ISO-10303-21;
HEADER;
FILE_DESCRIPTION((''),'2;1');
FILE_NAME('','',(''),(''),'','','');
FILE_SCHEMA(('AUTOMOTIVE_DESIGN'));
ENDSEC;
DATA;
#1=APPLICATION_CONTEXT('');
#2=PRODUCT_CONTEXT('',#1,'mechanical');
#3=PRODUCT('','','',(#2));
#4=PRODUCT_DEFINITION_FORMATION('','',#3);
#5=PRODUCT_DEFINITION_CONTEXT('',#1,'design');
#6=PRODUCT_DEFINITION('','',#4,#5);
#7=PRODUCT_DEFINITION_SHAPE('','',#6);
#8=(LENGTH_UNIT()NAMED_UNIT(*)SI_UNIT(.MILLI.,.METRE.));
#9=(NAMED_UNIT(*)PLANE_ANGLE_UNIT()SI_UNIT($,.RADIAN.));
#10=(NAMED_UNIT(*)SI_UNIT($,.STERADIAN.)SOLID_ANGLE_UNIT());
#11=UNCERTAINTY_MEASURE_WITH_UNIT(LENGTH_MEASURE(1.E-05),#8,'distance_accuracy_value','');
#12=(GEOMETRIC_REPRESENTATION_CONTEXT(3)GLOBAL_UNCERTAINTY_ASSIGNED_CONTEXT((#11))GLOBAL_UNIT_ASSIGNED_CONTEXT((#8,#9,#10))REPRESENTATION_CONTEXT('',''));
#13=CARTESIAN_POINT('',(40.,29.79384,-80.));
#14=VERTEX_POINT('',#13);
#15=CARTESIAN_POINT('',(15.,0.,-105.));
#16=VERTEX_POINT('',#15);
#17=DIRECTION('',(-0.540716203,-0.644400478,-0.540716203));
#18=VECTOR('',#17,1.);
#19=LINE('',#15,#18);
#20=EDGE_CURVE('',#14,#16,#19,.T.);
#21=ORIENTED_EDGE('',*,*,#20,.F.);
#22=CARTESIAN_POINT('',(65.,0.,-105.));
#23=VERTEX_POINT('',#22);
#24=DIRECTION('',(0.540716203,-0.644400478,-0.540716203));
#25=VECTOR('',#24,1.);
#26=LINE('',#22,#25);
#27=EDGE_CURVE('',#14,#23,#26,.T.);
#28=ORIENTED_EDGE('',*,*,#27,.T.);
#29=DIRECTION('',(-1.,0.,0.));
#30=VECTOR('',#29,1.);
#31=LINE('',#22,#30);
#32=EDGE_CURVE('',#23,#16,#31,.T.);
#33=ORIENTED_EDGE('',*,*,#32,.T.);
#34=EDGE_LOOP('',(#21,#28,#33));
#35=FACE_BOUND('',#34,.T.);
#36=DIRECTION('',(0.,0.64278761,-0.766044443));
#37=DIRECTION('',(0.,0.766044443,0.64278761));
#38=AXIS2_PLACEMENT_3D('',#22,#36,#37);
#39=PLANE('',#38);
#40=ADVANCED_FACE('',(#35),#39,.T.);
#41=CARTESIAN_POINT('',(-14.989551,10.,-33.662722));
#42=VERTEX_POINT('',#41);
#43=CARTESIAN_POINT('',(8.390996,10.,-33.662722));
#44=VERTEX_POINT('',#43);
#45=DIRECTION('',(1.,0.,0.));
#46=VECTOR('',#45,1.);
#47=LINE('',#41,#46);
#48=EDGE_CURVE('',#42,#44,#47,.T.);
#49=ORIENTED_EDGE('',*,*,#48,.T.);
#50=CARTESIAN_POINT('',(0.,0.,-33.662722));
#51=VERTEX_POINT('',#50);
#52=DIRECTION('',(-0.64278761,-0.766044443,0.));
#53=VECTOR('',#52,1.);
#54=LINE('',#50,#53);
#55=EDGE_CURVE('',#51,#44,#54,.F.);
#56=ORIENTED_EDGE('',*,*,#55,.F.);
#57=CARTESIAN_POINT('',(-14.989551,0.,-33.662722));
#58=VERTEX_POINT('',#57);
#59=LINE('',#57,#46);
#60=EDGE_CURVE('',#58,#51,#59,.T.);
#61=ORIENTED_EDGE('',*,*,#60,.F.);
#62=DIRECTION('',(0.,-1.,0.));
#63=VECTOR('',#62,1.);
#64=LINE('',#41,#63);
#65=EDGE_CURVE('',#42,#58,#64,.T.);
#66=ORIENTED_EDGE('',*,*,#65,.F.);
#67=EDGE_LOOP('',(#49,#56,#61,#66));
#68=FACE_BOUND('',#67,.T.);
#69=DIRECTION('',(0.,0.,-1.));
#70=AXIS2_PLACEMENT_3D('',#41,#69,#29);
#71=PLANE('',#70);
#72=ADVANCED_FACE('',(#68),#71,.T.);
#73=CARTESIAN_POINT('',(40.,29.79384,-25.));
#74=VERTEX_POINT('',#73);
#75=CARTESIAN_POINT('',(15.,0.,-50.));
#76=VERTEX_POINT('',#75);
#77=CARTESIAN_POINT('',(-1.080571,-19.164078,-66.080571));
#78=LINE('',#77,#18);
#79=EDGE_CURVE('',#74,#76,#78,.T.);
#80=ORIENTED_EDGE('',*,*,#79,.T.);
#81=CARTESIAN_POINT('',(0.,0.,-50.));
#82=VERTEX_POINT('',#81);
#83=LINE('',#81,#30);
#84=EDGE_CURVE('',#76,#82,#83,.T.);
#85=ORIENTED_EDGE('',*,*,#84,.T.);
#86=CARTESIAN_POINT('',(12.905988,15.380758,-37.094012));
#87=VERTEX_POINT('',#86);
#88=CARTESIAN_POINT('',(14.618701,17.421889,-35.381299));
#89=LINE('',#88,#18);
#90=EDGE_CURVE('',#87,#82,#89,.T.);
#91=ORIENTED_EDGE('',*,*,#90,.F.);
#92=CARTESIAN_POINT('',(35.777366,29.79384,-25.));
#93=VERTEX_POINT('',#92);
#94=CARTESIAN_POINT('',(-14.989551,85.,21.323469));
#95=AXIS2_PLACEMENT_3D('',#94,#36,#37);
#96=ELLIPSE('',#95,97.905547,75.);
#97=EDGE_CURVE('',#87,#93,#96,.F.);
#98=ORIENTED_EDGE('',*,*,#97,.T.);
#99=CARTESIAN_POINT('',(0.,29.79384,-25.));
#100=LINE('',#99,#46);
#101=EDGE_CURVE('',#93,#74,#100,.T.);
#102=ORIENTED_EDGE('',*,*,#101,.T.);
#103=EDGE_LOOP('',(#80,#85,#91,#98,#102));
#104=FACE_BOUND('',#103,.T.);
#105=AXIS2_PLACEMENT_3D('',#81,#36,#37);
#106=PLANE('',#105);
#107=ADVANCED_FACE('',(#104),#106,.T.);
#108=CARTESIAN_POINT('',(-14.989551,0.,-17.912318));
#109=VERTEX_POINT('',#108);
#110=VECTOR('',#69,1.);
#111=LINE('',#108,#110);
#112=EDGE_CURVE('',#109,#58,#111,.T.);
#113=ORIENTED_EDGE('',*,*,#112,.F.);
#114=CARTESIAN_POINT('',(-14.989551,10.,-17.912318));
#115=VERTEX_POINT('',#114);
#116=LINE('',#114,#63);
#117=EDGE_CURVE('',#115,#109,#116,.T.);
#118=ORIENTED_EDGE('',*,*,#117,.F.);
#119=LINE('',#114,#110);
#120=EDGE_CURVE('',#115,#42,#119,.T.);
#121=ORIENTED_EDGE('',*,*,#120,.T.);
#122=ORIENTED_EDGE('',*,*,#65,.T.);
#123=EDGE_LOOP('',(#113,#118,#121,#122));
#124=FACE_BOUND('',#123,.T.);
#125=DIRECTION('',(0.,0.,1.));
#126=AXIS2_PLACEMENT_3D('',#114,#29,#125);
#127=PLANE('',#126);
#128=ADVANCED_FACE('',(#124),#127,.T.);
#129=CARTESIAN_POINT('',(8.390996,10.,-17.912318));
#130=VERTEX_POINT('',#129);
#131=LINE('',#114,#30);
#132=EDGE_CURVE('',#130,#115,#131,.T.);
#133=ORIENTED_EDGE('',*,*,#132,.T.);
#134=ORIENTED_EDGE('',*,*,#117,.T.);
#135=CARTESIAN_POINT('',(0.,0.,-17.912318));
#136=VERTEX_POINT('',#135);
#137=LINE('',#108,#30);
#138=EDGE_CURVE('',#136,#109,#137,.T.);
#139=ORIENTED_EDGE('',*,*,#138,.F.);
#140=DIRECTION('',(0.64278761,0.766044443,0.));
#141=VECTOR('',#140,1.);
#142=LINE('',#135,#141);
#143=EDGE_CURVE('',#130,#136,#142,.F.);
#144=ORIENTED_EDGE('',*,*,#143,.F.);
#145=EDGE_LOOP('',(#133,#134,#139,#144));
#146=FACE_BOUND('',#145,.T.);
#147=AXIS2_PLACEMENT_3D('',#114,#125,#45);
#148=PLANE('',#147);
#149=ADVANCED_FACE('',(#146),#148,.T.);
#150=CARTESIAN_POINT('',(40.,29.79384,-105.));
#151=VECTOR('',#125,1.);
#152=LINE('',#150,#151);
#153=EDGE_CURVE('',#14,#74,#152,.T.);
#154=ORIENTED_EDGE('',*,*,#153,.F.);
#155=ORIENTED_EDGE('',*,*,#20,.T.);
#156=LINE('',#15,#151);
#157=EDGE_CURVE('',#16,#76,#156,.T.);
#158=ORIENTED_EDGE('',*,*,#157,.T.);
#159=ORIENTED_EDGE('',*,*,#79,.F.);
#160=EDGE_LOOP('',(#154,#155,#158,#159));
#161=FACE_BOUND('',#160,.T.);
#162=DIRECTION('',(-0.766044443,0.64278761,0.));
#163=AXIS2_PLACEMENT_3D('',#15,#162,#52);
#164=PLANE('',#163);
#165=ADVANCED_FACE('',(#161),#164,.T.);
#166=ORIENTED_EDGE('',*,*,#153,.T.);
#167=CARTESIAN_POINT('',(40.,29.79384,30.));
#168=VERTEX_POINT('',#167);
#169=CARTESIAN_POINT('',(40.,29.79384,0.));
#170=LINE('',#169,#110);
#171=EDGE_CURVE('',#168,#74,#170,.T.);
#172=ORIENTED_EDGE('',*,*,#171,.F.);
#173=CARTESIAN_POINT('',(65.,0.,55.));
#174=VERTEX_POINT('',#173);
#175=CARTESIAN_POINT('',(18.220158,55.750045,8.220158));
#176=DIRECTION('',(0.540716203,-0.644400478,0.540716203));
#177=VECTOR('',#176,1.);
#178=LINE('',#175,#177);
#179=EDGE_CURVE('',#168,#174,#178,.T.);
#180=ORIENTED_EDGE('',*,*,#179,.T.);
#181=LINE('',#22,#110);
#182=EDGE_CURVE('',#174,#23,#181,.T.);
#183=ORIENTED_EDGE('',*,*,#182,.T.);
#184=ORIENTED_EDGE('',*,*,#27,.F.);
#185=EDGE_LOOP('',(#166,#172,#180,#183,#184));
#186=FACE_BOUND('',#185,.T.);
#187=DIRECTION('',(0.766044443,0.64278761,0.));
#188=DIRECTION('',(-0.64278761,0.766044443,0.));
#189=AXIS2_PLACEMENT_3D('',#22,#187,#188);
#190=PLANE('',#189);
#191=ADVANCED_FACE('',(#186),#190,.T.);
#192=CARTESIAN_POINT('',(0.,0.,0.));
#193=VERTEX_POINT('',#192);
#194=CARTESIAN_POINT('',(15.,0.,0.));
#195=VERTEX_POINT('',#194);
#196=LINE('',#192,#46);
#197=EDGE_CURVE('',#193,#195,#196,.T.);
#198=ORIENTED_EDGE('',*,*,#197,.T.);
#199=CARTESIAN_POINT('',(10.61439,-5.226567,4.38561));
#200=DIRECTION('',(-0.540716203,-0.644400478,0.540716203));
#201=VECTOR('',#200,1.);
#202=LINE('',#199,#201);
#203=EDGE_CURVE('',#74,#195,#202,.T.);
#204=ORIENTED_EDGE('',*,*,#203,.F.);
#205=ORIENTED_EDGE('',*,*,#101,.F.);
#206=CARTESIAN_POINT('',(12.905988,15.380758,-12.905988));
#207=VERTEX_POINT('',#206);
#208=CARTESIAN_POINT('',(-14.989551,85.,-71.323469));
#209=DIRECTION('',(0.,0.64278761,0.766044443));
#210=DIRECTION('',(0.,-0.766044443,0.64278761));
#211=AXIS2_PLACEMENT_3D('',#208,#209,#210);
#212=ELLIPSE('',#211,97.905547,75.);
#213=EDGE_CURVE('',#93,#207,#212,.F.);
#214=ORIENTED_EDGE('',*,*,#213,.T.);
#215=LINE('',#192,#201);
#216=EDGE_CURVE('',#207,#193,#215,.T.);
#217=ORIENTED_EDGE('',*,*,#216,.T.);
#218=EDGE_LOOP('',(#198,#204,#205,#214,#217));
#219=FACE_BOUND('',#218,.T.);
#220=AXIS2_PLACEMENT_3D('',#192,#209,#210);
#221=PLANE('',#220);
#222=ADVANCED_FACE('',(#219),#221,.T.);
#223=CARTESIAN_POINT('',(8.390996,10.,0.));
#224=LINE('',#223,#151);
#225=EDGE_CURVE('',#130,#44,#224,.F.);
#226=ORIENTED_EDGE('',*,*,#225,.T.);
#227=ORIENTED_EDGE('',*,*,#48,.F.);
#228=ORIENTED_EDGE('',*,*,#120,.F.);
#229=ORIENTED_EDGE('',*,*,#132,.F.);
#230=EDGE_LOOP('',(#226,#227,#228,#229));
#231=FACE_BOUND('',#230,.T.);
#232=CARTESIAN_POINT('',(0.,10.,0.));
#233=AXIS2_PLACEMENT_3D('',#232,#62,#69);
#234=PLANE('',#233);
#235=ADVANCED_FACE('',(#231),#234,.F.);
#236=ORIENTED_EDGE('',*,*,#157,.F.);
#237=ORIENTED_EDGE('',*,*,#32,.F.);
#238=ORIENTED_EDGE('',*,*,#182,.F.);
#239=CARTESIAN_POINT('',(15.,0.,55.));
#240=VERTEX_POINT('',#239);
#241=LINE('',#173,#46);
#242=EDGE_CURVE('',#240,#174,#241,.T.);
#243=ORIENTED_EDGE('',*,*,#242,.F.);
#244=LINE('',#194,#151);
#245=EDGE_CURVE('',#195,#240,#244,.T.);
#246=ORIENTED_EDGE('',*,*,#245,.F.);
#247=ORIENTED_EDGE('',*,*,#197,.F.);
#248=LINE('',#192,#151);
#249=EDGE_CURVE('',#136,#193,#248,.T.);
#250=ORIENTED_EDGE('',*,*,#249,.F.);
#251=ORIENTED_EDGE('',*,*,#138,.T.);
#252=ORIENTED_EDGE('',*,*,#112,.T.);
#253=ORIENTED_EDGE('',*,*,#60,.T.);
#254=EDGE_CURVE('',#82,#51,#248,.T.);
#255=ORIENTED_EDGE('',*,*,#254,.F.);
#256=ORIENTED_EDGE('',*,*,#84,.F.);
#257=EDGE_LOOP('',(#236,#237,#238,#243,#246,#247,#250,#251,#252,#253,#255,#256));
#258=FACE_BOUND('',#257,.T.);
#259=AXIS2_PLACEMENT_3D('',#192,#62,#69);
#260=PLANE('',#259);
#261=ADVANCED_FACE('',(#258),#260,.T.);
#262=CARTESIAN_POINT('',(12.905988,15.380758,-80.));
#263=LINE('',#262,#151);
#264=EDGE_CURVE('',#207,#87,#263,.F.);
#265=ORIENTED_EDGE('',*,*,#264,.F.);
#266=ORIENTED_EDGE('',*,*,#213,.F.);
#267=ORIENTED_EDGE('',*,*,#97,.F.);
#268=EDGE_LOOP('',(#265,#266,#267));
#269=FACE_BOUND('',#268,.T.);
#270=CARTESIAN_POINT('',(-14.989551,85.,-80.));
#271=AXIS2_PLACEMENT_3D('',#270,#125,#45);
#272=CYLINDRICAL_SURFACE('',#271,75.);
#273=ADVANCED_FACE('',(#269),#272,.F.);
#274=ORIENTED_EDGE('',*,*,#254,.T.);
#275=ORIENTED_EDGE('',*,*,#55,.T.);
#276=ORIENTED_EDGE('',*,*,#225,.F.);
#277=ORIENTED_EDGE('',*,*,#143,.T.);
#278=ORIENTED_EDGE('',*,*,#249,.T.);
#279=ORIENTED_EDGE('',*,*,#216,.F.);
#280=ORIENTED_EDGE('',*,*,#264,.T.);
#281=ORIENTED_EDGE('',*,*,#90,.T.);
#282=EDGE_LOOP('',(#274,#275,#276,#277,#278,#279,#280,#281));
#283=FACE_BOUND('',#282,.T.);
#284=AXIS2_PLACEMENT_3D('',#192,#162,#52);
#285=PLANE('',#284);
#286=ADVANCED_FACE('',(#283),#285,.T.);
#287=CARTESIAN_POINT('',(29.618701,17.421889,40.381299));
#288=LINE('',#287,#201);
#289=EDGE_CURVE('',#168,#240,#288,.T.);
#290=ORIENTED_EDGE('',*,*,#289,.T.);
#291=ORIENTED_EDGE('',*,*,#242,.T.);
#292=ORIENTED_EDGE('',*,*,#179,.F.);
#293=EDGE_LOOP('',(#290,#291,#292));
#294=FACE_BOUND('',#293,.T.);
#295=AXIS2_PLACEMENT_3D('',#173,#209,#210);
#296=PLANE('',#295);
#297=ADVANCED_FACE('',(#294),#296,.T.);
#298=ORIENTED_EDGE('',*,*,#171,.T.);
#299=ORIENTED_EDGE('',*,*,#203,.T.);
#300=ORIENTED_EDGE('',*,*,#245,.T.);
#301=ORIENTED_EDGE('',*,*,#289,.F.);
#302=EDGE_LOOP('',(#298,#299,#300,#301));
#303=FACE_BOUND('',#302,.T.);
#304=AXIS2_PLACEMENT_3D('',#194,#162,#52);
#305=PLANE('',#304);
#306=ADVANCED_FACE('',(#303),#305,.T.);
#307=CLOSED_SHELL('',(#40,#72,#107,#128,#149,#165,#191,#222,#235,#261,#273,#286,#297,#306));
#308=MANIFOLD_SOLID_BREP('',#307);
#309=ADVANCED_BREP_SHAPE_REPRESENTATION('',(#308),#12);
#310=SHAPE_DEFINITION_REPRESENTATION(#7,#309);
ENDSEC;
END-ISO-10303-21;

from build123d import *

# Parameters (mm, degrees)
BOSS_EXTRUDE1_START       = -105
BOSS_EXTRUDE1_DEPTH       = 160
BOSS_EXTRUDE1_2_DEPTH     = 40
BOSS_EXTRUDE1_START_2     = -20
BOSS_EXTRUDE1_3_OUTLINE_W = 47
BOSS_EXTRUDE1_3_OUTLINE_H = 147
BOSS_EXTRUDE1_3_DEPTH     = 20
BOSS_EXTRUDE1_START_3     = 42.132444372
BOSS_EXTRUDE1_4_OUTLINE_W = 53
BOSS_EXTRUDE1_4_OUTLINE_H = 116
BOSS_EXTRUDE1_4_DEPTH     = 19.867555628
BOSS_EXTRUDE1_START_4     = 80.434666527
BOSS_EXTRUDE1_5_OUTLINE_W = 52
BOSS_EXTRUDE1_5_OUTLINE_H = 117
BOSS_EXTRUDE1_5_DEPTH     = 20.565333473
SKETCH3_W                 = 27.900715286
SKETCH3_H                 = 15.750403791
BOSS_EXTRUDE2_DEPTH       = 10
SKETCH4_R                 = 75
CUT_EXTRUDE1_DEPTH        = 80


with BuildPart() as part:
    # Boss-Extrude1: read off the stored shape, not the designer's step
    # Boss-Extrude1 outline → Boss-Extrude1 (new body)
    with BuildSketch(Plane.XY.offset(BOSS_EXTRUDE1_START)):
        Polygon((65, 0), (40, 29.793839815), (15, 0), align=None)
    extrude(amount=BOSS_EXTRUDE1_DEPTH)

    # Boss-Extrude1 2 outline → Boss-Extrude1 2 (add)
    with BuildSketch(Plane.YZ):
        Polygon((0, -50), (29.793839815, -25), (0, 0), align=None)
    extrude(amount=BOSS_EXTRUDE1_2_DEPTH)

    # Boss-Extrude1 3 outline → Boss-Extrude1 3 (cut)
    with BuildSketch(Plane(origin=(0, 0, 0), x_dir=(0.6427876096865404, 0.7660444431189772, 0), z_dir=(0.7660444431189772, -0.6427876096865403, 0)).offset(BOSS_EXTRUDE1_START_2)):
        with Locations((22.5, -24.5)):
            Rectangle(BOSS_EXTRUDE1_3_OUTLINE_W, BOSS_EXTRUDE1_3_OUTLINE_H)
    extrude(amount=BOSS_EXTRUDE1_3_DEPTH, mode=Mode.SUBTRACT)

    # Boss-Extrude1 4 outline → Boss-Extrude1 4 (cut)
    with BuildSketch(Plane(origin=(0, 0, 0), x_dir=(1, 0, 0), z_dir=(0, 0.6427876096865403, 0.7660444431189772)).offset(BOSS_EXTRUDE1_START_3)):
        with Locations((40.5, 21)):
            Rectangle(BOSS_EXTRUDE1_4_OUTLINE_W, BOSS_EXTRUDE1_4_OUTLINE_H)
    extrude(amount=BOSS_EXTRUDE1_4_DEPTH, mode=Mode.SUBTRACT)

    # Boss-Extrude1 5 outline → Boss-Extrude1 5 (cut)
    with BuildSketch(Plane(origin=(0, 0, 0), x_dir=(1, 0, 0), z_dir=(0, 0.6427876096865403, -0.7660444431189772)).offset(BOSS_EXTRUDE1_START_4)):
        with Locations((40, 10.5)):
            Rectangle(BOSS_EXTRUDE1_5_OUTLINE_W, BOSS_EXTRUDE1_5_OUTLINE_H)
    extrude(amount=BOSS_EXTRUDE1_5_DEPTH, mode=Mode.SUBTRACT)

    # Sketch3 → Boss-Extrude2 (add)
    with BuildSketch(Plane.XZ):
        with Locations((-1.039193036, -25.78752019)):
            Rectangle(SKETCH3_W, SKETCH3_H)
    extrude(amount=-BOSS_EXTRUDE2_DEPTH)

    # Sketch4 → Cut-Extrude1 (cut, symmetric)
    with BuildSketch(Plane.XY):
        with Locations((-14.989550679, 85)):
            Circle(SKETCH4_R)
    extrude(amount=CUT_EXTRUDE1_DEPTH, both=True, mode=Mode.SUBTRACT)


solid = part.part
